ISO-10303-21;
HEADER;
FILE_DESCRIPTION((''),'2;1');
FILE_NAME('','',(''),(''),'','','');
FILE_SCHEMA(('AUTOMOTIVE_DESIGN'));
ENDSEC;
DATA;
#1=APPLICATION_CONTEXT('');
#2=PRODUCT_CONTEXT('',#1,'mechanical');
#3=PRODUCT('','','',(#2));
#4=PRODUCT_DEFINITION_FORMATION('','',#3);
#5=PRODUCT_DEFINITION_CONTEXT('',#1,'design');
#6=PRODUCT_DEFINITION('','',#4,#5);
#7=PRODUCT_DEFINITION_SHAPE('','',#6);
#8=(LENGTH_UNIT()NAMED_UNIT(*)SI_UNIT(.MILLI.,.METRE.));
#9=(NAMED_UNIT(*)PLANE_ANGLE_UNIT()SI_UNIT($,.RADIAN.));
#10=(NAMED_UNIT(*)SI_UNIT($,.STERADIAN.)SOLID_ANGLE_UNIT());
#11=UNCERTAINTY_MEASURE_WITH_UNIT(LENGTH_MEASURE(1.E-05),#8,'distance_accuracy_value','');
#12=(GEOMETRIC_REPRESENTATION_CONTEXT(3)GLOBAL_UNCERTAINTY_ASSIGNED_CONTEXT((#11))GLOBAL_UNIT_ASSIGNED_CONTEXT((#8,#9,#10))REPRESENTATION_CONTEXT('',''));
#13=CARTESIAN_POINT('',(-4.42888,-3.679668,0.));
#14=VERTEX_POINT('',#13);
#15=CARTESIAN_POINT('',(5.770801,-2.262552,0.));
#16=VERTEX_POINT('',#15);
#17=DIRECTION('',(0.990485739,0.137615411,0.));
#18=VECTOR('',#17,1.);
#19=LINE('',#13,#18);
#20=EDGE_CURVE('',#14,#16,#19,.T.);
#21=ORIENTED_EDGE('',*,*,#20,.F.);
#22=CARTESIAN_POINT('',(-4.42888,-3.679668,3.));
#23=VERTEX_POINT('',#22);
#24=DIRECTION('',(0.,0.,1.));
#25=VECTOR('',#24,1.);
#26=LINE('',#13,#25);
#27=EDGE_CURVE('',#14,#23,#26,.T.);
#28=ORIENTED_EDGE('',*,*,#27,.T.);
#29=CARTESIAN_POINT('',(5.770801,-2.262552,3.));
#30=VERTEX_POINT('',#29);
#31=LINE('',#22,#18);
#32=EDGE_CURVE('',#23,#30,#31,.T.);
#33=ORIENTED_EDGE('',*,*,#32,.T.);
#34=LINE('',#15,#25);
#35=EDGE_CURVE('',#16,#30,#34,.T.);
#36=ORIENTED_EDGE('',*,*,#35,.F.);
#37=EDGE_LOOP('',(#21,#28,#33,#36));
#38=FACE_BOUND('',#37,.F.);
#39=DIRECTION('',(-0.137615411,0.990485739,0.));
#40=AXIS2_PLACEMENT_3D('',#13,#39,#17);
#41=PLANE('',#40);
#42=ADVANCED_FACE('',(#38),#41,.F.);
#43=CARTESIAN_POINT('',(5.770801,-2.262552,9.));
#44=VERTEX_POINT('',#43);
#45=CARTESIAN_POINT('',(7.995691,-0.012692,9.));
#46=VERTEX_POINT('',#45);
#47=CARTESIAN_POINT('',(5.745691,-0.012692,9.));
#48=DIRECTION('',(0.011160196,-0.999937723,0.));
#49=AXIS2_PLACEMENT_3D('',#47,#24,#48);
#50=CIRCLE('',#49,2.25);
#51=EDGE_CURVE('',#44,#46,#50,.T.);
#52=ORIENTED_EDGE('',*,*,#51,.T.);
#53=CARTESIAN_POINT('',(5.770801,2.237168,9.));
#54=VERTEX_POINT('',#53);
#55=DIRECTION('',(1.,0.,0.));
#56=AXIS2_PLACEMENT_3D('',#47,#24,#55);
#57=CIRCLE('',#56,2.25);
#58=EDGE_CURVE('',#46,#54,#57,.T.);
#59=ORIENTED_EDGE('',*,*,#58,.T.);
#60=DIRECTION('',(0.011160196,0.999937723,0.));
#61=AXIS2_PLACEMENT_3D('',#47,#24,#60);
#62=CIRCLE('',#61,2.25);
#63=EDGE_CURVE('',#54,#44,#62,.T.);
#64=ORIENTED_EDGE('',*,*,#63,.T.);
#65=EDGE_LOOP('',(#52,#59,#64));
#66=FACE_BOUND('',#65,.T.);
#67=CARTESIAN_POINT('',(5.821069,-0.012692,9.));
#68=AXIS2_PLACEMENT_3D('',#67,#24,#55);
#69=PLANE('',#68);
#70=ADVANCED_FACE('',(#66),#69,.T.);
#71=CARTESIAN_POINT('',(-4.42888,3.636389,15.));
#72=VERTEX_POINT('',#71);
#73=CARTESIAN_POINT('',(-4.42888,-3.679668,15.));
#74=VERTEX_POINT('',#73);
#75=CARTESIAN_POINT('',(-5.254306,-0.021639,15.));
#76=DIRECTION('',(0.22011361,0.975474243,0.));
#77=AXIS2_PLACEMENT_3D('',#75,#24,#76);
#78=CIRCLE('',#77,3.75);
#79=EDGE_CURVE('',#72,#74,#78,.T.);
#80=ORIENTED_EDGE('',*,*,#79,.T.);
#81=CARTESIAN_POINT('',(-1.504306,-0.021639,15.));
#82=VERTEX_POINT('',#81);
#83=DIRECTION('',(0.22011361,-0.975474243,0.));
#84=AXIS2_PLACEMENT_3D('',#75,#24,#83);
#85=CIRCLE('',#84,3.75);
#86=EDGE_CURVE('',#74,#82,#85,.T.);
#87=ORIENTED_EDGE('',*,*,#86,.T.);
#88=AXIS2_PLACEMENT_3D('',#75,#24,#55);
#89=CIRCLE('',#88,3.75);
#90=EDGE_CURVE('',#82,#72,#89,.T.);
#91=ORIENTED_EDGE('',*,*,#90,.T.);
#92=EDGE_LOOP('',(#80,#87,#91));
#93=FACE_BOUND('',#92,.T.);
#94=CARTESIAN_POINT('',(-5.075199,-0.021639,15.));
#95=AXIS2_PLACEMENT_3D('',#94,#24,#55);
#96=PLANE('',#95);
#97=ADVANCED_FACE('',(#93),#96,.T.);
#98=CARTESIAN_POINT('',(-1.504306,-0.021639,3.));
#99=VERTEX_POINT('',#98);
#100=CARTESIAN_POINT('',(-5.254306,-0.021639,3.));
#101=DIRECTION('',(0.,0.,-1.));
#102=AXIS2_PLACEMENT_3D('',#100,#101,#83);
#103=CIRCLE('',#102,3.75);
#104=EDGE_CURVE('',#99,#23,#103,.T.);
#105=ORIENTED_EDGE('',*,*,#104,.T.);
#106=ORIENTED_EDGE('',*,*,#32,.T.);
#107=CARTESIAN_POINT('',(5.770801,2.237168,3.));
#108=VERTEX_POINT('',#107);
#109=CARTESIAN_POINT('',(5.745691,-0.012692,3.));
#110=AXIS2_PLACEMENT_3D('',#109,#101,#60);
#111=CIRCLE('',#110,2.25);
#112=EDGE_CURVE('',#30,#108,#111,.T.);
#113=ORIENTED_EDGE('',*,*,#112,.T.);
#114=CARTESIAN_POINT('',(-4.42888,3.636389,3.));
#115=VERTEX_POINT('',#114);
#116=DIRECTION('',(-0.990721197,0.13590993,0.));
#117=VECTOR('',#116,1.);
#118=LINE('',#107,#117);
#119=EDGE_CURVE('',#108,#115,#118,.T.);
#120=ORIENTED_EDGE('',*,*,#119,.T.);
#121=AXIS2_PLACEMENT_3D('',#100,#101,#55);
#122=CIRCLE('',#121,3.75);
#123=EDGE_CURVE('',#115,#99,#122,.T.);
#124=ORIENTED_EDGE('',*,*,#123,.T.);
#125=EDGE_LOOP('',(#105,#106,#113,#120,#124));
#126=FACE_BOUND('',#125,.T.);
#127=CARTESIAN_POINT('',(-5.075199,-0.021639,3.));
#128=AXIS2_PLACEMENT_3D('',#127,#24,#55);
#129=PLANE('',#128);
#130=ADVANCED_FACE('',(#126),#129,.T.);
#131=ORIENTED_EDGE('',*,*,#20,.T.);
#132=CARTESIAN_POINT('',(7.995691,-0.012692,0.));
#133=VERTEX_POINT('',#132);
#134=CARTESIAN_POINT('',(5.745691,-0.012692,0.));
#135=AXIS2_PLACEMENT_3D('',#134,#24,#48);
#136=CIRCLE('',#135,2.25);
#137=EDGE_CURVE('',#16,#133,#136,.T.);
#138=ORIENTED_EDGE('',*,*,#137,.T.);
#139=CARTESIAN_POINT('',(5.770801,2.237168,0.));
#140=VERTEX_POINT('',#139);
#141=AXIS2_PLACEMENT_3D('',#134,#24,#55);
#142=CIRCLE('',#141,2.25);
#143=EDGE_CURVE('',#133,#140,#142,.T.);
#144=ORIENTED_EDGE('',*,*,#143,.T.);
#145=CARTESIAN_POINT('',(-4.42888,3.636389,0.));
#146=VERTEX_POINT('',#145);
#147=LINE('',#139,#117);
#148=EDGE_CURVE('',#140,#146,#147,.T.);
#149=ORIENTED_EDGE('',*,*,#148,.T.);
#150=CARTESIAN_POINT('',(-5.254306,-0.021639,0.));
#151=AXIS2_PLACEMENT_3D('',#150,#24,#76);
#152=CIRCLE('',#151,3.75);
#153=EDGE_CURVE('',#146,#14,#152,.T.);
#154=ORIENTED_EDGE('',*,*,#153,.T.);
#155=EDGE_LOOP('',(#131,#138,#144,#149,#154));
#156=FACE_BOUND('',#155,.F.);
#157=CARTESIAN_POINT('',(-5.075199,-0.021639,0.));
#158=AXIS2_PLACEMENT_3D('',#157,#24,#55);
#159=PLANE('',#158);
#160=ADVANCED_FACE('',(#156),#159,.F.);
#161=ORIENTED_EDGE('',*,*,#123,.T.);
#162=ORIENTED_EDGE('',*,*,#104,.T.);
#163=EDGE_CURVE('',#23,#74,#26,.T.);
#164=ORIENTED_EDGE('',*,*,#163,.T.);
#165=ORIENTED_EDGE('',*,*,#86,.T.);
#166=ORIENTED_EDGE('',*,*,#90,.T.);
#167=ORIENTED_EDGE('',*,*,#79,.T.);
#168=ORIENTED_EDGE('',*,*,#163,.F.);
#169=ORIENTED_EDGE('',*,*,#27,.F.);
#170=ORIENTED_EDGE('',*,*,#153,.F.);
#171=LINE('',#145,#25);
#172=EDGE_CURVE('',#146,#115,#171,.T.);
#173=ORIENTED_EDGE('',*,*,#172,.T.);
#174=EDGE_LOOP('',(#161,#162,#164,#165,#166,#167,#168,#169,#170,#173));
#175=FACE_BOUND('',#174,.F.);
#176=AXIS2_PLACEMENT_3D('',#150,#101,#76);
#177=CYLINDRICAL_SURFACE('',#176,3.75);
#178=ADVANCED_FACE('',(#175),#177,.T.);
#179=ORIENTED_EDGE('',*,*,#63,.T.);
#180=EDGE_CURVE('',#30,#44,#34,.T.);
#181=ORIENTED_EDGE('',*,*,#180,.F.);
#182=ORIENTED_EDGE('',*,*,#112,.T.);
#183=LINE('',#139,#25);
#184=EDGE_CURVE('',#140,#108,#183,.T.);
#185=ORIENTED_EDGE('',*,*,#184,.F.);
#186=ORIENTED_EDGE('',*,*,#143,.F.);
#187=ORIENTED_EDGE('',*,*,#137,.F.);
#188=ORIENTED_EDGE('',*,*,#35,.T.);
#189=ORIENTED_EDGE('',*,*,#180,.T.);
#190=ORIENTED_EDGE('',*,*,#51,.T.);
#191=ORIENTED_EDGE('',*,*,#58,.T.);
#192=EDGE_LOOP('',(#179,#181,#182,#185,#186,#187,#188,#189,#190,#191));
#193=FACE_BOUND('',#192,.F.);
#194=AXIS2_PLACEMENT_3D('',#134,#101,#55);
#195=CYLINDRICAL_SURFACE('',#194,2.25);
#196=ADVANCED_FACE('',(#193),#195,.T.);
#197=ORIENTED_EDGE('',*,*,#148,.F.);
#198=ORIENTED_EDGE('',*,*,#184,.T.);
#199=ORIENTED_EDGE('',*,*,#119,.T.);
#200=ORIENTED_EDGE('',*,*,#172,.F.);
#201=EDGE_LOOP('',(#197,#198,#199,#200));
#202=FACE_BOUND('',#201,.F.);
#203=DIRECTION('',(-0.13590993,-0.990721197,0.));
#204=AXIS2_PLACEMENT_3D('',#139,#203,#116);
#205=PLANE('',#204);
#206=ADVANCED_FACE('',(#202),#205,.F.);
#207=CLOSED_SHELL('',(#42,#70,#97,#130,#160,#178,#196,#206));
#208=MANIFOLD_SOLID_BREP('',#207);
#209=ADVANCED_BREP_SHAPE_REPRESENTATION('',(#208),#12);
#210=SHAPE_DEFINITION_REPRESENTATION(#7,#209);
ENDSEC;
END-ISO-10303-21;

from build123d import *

# Parameters (mm, degrees)
F1_DEPTH = 3
F2_DEPTH = 15
F3_DEPTH = 9


with BuildPart() as f1:
    # F0 (on Top) → F1 (new body)
    with BuildSketch(Plane.XY):
        with BuildLine():
            ThreePointArc((-4.4288796676, -3.6796678124), (-2.3253257096, -2.3633430927), (-1.5043057066, -0.0216394017))
            ThreePointArc((-1.5043057066, -0.0216394017), (-2.3253257096, 2.3200642894), (-4.4288796676, 3.6363890091))
            ThreePointArc((-4.4288796676, 3.6363890091), (-9.0043057066, -0.0216394017), (-4.4288796676, -3.6796678124))
        make_face()
        with BuildLine():
            ThreePointArc((-4.4288796676, 3.6363890091), (-2.3253257096, 2.3200642894), (-1.5043057066, -0.0216394017))
            ThreePointArc((-1.5043057066, -0.0216394017), (-2.3253257096, -2.3633430927), (-4.4288796676, -3.6796678124))
            Line((-4.4288796676, -3.6796678124), (5.7708010962, -2.262551744))
            ThreePointArc((5.7708010962, -2.262551744), (3.4956906544, -0.0126918671), (5.7708010962, 2.2371680098))
            Line((5.7708010962, 2.2371680098), (-4.4288796676, 3.6363890091))
        make_face()
        with BuildLine():
            ThreePointArc((7.9956906544, -0.0126918671), (7.3455341614, 1.5693955998), (5.7708010962, 2.2371680098))
            ThreePointArc((5.7708010962, 2.2371680098), (3.4956906544, -0.0126918671), (5.7708010962, -2.262551744))
            ThreePointArc((5.7708010962, -2.262551744), (7.3455341614, -1.594779334), (7.9956906544, -0.0126918671))
        make_face()
    extrude(amount=F1_DEPTH)

    # F0 (on Top) → F2 (join)
    with BuildSketch(Plane.XY):
        with BuildLine():
            ThreePointArc((-4.4288796676, -3.6796678124), (-2.3253257096, -2.3633430927), (-1.5043057066, -0.0216394017))
            ThreePointArc((-1.5043057066, -0.0216394017), (-2.3253257096, 2.3200642894), (-4.4288796676, 3.6363890091))
            ThreePointArc((-4.4288796676, 3.6363890091), (-9.0043057066, -0.0216394017), (-4.4288796676, -3.6796678124))
        make_face()
    extrude(amount=F2_DEPTH)

    # F0 (on Top) → F3 (join)
    with BuildSketch(Plane.XY):
        with BuildLine():
            ThreePointArc((7.9956906544, -0.0126918671), (7.3455341614, 1.5693955998), (5.7708010962, 2.2371680098))
            ThreePointArc((5.7708010962, 2.2371680098), (3.4956906544, -0.0126918671), (5.7708010962, -2.262551744))
            ThreePointArc((5.7708010962, -2.262551744), (7.3455341614, -1.594779334), (7.9956906544, -0.0126918671))
        make_face()
    extrude(amount=F3_DEPTH)


solid = f1.part
